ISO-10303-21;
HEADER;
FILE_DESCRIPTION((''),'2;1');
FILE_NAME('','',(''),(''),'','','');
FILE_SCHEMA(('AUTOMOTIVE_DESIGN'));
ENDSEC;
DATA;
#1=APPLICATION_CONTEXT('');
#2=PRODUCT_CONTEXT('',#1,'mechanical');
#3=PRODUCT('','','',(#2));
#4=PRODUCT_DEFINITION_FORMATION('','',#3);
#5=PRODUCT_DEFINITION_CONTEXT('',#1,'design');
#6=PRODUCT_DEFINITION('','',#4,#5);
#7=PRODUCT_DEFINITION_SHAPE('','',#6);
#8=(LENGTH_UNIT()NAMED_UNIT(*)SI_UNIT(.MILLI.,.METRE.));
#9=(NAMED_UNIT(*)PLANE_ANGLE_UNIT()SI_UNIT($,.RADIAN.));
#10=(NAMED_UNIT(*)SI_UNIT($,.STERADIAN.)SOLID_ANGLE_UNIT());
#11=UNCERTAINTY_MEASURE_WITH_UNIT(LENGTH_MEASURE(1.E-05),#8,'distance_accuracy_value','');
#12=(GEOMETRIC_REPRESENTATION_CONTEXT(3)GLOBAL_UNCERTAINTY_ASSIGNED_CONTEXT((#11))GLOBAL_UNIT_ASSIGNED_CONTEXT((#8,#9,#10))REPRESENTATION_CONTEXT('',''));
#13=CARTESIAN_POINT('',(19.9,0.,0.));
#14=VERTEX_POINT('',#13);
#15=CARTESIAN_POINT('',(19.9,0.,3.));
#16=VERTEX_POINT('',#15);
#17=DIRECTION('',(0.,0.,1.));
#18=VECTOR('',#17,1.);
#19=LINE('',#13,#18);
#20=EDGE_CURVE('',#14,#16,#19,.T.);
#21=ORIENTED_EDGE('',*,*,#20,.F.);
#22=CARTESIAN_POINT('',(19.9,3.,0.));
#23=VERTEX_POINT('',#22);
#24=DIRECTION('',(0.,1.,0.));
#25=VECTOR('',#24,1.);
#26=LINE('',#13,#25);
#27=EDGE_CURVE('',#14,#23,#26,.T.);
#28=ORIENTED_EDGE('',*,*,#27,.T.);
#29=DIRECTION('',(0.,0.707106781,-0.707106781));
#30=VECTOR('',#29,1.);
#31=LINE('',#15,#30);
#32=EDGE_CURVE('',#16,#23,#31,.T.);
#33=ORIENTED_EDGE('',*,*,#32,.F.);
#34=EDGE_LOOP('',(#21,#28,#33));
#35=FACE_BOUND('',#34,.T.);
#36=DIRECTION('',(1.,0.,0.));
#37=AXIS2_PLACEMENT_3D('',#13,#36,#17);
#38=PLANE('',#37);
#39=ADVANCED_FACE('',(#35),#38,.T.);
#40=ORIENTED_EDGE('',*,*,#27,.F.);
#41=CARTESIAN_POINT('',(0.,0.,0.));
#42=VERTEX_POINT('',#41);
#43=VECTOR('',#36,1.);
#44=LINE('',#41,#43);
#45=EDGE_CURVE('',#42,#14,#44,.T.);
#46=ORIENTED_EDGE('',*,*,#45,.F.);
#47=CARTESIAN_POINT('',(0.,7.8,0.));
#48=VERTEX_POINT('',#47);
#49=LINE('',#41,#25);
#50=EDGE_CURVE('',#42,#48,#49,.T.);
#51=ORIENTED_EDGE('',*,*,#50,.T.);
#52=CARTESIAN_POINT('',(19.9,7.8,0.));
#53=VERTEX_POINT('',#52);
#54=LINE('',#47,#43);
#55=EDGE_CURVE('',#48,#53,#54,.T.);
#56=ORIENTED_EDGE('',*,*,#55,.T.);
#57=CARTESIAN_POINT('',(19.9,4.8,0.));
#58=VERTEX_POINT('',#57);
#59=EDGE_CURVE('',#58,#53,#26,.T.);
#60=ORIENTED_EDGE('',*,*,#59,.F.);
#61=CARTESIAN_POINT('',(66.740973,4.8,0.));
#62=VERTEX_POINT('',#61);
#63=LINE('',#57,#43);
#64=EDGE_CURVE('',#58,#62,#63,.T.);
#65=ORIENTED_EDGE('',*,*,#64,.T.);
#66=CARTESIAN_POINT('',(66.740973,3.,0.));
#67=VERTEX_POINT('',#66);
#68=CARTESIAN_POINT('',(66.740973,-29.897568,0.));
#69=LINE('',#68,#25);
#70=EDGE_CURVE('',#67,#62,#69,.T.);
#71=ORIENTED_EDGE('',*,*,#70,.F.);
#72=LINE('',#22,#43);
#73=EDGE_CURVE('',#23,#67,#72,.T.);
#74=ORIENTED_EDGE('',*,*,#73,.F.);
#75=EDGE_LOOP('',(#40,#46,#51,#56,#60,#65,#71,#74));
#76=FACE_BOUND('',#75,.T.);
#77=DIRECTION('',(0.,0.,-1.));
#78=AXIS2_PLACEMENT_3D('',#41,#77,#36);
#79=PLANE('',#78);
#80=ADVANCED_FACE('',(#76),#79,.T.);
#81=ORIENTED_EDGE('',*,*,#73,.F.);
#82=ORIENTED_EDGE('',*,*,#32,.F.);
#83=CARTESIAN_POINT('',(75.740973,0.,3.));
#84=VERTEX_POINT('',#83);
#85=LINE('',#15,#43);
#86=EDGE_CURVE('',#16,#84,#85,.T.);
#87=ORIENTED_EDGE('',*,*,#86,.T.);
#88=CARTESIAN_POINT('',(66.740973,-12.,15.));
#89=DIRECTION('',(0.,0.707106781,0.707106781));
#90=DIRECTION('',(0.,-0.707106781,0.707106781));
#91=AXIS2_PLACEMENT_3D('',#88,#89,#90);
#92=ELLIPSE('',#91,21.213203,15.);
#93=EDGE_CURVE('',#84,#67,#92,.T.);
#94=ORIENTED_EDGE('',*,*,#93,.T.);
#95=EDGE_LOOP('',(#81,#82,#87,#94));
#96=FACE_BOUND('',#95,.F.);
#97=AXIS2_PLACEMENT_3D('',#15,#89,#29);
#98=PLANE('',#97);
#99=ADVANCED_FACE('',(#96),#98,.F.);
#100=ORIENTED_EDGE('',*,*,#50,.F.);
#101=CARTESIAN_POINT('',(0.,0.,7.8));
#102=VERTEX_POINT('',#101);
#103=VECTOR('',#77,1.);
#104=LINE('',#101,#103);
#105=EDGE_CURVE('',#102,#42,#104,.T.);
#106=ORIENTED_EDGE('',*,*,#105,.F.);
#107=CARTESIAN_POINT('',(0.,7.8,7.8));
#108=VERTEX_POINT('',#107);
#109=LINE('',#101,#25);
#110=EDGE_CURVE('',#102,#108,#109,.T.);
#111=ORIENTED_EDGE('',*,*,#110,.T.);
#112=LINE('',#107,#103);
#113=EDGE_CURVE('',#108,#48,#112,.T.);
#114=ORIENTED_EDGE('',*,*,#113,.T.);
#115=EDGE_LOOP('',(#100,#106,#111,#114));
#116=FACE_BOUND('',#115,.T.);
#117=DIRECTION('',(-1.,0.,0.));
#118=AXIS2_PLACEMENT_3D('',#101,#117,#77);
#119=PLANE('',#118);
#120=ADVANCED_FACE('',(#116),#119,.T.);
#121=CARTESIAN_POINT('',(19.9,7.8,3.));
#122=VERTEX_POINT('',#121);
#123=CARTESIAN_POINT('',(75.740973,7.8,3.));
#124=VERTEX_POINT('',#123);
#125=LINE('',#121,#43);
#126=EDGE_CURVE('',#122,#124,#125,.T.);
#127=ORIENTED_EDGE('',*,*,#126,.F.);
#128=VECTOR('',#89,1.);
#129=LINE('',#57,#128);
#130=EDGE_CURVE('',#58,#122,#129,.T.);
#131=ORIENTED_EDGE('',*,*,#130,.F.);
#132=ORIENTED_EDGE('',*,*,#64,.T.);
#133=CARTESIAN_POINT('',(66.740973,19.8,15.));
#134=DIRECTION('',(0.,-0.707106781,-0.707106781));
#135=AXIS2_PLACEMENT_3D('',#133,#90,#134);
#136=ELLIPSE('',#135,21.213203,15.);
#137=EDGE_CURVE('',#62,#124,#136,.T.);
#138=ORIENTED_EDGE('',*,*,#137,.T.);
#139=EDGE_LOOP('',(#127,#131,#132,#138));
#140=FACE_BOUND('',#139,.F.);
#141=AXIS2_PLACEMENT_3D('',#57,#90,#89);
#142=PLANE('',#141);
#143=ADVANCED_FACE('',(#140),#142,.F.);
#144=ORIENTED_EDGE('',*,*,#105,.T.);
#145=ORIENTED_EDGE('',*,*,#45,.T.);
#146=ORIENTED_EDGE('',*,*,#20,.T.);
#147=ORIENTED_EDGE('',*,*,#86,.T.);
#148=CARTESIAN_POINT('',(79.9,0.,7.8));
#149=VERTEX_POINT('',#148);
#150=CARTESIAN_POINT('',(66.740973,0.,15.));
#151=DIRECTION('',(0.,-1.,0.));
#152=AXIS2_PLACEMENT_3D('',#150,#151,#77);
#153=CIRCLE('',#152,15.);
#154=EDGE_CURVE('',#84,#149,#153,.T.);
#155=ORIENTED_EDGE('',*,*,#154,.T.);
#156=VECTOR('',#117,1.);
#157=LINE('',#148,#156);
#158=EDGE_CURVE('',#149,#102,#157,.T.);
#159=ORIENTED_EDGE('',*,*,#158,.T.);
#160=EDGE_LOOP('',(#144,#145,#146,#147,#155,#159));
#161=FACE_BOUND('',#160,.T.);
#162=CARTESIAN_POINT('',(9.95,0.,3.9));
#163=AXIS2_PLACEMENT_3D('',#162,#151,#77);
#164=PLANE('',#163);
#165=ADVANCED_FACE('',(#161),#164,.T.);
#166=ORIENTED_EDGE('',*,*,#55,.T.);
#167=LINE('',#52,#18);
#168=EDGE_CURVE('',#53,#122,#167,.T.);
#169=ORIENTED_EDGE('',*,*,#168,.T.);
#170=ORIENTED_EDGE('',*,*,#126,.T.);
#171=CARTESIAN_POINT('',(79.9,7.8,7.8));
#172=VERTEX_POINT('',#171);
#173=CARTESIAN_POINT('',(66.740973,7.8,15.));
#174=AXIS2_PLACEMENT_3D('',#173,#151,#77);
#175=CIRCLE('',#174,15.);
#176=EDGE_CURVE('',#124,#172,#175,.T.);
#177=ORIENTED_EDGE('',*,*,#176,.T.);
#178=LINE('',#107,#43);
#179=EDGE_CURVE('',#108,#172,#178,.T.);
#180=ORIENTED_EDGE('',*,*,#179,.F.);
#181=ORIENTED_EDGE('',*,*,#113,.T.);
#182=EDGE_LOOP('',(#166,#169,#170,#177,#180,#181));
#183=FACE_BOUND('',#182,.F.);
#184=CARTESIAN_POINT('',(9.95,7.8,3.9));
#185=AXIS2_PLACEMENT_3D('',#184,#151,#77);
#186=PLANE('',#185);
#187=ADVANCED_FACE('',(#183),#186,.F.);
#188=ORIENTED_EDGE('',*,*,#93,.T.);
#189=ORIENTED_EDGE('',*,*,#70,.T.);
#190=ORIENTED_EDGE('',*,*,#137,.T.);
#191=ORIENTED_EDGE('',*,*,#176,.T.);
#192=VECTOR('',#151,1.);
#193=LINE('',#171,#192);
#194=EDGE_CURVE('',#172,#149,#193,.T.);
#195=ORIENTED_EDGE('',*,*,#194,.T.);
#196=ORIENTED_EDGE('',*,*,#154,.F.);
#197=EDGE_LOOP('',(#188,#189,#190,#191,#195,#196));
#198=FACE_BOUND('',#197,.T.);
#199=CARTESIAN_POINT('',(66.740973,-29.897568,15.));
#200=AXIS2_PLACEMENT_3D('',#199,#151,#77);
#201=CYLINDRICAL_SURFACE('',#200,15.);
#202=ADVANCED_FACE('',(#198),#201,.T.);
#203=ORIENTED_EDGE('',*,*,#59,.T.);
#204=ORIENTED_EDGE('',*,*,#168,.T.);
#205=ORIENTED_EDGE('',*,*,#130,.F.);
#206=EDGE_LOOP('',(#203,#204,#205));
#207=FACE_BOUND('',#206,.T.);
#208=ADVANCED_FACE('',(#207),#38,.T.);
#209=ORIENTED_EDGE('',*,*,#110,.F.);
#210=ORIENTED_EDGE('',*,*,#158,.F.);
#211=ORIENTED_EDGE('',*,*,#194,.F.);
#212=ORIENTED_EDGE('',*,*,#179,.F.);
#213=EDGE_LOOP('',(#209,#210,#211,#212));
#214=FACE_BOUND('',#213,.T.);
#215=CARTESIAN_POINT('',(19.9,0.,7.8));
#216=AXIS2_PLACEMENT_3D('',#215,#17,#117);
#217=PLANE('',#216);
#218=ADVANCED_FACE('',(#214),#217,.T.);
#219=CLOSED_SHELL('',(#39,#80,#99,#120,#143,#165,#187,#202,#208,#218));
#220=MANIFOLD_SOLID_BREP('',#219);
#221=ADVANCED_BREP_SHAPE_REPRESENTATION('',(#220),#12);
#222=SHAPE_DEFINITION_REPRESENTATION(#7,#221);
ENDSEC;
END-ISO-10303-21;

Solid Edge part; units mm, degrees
sketch "Sketch1" plane through (0, 0, 0) normal (0, -1, 0) x (1, 0, 0)
  line L0 (0, 0) -> (19.9, 0)
  line L1 (19.9, 0) -> (19.9, 7.8)
  line L2 (19.9, 7.8) -> (0, 7.8)
  line L3 (0, 7.8) -> (0, 0)
  dimension "D1" = 7.8
  dimension "D2" = 19.9
extrude "Protrusion1" add sketch "Sketch1" against normal blind 7.8
sketch "Sketch2" plane through (19.9, 3.95, 3.95) normal (1, 0, 0) x (0, 1, 0)
  line L0 (3.85, 3.85) -> (-3.95, 3.85)
  line L1 (-3.95, 3.85) -> (-3.95, -0.95)
  line L2 (-3.95, -0.95) -> (-0.95, -3.95)
  line L3 (-0.95, -3.95) -> (0.85, -3.95)
  line L4 (0.85, -3.95) -> (3.85, -0.95)
  line L5 (3.85, -0.95) -> (3.85, 3.85)
extrude "ExtrudedProtrusion_2" add sketch "Sketch2" along normal blind 60
fillet "Round_1" radius 15 1 edges at (79.9, 3.9, 0)
